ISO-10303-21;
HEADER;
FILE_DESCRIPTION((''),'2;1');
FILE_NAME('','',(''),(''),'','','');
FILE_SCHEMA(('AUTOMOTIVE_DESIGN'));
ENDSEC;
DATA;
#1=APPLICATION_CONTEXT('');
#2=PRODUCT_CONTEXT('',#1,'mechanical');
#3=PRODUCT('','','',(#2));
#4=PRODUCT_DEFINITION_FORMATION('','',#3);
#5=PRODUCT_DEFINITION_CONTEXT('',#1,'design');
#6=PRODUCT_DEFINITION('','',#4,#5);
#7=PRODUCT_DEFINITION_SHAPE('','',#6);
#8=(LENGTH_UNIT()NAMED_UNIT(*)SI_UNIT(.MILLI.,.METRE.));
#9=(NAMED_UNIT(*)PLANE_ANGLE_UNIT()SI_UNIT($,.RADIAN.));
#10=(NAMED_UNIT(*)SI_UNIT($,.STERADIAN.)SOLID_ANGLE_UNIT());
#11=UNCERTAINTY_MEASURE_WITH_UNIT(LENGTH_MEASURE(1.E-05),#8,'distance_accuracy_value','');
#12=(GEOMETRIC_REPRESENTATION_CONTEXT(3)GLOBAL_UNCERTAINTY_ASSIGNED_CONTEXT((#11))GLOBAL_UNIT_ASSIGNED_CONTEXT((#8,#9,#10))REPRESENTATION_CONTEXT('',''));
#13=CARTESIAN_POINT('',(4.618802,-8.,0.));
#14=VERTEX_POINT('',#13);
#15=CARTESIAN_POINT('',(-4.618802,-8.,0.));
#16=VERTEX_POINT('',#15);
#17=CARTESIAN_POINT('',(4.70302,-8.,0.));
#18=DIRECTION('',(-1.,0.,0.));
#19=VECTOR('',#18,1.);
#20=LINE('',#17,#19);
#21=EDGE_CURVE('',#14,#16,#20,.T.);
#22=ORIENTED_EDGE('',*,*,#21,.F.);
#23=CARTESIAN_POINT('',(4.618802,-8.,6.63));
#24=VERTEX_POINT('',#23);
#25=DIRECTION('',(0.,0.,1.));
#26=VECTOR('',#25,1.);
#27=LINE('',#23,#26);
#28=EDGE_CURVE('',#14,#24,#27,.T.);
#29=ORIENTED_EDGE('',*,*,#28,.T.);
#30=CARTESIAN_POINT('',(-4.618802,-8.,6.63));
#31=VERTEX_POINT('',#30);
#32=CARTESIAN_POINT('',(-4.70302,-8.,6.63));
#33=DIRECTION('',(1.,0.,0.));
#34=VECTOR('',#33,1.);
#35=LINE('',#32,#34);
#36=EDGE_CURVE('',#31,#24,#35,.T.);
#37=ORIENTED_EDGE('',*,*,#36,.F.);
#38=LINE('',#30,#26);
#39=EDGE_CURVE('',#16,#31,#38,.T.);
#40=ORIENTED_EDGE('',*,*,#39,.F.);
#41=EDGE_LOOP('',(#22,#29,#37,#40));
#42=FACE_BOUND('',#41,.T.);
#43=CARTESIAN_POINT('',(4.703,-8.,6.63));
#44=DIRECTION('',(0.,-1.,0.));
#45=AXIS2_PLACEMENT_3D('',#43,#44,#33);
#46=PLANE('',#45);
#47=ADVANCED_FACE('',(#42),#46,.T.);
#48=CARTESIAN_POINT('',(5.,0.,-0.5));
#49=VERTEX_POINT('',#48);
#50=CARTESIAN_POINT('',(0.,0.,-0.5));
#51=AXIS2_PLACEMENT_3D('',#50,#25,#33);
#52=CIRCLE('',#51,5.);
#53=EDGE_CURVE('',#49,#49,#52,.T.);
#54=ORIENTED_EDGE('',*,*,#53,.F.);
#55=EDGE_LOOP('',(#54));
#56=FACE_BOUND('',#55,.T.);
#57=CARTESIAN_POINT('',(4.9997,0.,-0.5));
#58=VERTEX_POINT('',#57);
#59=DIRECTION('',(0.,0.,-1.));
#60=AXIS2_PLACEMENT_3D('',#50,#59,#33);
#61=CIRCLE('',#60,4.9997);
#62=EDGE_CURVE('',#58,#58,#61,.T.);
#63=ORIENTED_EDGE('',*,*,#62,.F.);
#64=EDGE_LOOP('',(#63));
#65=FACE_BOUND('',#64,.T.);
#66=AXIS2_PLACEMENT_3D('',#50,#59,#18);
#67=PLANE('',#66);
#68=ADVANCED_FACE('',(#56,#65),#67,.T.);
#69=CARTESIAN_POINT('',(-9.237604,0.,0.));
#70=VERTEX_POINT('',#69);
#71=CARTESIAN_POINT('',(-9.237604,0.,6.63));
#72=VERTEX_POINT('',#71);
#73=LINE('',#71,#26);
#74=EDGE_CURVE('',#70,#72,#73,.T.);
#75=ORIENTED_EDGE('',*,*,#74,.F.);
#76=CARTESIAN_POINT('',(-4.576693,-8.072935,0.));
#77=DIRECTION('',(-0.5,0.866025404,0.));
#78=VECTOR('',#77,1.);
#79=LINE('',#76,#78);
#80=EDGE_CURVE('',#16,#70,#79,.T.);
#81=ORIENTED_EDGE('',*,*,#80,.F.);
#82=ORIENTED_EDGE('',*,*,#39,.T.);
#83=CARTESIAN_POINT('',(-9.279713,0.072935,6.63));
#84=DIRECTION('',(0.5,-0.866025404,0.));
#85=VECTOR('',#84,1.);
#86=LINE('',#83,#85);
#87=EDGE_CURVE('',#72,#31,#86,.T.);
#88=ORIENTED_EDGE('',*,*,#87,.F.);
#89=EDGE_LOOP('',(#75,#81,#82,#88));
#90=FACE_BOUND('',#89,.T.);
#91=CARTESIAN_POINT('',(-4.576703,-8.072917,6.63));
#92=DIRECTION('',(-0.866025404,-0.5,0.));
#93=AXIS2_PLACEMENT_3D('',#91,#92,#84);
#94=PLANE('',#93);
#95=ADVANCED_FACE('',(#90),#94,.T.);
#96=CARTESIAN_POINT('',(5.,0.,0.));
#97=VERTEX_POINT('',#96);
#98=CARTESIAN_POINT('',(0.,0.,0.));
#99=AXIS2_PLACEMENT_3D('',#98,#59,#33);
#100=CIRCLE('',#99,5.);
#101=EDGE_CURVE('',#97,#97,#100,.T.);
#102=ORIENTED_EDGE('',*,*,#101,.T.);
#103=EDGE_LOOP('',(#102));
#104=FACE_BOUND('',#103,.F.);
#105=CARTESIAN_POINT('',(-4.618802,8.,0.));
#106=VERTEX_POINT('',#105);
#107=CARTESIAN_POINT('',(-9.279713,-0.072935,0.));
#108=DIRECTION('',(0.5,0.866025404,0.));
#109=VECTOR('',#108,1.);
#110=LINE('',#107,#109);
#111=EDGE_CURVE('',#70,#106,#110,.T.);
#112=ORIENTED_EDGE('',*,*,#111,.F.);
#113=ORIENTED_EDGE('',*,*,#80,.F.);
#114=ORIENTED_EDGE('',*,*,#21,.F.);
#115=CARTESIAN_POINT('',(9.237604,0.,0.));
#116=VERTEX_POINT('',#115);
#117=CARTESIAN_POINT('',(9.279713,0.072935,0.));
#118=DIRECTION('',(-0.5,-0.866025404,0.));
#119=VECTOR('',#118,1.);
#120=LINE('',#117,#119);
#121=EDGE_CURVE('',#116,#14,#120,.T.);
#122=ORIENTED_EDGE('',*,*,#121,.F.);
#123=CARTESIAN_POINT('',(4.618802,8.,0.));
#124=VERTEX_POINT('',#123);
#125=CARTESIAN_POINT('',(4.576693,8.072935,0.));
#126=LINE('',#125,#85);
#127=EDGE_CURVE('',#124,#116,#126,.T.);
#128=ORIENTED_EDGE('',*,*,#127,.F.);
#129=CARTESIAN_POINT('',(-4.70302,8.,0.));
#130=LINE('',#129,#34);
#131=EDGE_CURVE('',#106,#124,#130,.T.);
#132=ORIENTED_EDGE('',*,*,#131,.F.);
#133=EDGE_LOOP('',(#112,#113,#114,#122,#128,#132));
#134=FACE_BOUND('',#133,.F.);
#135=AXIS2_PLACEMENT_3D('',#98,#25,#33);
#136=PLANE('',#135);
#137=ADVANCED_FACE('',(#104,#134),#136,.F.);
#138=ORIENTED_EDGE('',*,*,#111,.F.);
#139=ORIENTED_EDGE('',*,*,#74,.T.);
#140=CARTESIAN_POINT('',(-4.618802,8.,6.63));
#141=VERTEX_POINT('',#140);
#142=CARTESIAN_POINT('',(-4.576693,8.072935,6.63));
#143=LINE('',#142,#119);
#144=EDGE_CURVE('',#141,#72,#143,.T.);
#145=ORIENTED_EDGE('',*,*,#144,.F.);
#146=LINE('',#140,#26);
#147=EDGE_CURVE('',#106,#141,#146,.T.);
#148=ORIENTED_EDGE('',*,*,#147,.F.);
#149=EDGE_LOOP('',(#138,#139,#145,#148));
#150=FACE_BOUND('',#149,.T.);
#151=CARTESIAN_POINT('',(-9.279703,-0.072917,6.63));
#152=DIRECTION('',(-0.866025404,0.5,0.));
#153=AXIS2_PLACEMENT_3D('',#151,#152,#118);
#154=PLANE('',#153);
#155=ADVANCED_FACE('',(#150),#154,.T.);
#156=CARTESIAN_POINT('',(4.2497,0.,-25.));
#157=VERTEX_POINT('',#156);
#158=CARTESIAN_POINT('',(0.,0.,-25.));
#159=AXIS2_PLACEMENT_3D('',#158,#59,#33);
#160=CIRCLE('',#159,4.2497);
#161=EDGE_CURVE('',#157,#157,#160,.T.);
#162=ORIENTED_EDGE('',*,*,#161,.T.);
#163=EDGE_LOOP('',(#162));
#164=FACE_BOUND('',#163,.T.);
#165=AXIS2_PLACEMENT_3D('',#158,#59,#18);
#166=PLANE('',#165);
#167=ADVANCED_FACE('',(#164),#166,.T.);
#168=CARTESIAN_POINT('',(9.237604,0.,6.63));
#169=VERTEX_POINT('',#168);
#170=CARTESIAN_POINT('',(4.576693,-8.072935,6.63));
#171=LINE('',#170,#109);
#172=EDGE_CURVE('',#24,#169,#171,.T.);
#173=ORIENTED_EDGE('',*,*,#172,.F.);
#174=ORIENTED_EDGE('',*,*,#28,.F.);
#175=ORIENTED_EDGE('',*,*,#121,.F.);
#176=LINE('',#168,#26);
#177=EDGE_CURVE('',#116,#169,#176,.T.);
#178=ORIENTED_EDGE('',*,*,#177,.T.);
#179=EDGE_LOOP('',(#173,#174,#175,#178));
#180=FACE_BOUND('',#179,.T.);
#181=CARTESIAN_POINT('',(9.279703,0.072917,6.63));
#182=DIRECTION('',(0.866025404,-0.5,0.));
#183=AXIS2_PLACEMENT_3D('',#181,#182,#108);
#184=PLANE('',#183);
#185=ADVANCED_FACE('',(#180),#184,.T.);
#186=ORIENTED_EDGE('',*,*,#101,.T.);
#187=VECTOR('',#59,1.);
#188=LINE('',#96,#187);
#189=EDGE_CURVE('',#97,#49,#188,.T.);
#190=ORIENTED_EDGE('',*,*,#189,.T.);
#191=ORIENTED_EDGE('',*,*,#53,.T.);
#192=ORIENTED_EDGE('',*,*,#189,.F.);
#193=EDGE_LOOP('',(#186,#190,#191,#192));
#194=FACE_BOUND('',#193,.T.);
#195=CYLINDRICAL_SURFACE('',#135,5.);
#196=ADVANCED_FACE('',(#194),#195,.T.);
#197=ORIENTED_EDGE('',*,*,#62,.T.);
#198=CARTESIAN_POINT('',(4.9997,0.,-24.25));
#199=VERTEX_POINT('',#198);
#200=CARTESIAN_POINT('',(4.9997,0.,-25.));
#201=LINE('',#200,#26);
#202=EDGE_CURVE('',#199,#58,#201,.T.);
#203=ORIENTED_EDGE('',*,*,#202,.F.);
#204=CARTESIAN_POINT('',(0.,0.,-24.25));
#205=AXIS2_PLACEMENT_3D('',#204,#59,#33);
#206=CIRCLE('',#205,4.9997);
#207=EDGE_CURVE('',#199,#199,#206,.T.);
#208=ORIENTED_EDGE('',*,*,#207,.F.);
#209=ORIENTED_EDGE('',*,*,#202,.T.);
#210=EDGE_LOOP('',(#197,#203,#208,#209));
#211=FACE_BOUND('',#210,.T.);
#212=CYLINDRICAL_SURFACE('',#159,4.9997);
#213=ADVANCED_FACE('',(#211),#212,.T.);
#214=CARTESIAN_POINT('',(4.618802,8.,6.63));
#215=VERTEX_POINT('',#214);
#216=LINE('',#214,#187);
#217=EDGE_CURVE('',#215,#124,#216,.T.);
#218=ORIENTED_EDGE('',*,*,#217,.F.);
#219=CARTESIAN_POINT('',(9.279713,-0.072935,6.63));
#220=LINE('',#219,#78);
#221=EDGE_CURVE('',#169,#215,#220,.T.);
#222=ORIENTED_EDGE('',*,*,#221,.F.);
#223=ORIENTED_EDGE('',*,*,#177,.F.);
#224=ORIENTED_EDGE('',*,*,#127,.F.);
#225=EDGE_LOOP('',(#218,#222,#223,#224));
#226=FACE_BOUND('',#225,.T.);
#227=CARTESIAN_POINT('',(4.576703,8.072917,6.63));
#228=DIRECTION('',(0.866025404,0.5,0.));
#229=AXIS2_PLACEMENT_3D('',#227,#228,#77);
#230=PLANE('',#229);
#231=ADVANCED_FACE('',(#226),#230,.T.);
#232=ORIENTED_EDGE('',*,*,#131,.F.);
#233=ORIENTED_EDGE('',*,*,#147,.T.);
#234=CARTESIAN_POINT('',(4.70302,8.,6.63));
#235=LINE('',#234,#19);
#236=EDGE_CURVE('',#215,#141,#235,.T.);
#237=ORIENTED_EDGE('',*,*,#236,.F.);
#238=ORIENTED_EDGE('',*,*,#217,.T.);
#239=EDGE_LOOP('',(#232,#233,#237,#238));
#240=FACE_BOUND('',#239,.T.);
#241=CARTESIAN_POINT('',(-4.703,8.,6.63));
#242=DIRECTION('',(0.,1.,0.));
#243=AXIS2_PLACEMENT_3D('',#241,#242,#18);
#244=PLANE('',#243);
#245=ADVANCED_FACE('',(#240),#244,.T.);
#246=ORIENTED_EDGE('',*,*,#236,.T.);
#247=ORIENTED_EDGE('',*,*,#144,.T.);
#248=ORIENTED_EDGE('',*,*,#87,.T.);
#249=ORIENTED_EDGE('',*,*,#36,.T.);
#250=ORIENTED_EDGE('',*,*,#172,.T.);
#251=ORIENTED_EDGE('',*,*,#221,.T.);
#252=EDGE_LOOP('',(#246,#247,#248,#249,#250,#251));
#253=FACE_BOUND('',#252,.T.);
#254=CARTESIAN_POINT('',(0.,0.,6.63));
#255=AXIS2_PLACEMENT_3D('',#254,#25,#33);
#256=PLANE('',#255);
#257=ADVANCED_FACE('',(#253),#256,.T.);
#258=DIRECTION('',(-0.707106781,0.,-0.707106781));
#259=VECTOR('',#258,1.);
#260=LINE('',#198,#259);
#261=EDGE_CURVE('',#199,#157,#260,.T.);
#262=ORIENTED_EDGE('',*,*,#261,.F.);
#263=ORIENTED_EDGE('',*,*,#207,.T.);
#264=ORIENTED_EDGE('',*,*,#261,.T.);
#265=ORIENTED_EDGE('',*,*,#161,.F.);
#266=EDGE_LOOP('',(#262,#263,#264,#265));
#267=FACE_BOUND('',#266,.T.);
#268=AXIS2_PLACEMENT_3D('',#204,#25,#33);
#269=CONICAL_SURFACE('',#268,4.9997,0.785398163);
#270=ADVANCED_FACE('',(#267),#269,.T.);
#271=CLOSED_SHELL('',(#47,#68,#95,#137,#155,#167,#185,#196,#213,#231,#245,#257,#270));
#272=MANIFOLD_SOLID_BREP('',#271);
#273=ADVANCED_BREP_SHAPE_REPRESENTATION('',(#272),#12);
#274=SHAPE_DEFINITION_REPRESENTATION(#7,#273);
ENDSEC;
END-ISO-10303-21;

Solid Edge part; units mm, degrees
sketch "Sketch1" plane through (0, 0, 0) normal (0, 0, 1) x (1, 0, 0)
  circle A0 centre (0, 0) radius 9.28
  dimension "D1" = 18.56
extrude "Protrusion1" add sketch "Sketch1" along normal blind 6.63
sketch "Sketch2" plane through (0, 0, 0) normal (0, 0, -1) x (1, 0, 0)
  circle A0 centre (0, 0) radius 5
extrude "Protrusion2" add sketch "Sketch2" along normal blind 25
sketch "Sketch3" plane through (0, 0, -25) normal (0, 0, -1) x (1, 0, 0)
  circle A0 centre (0, 0) radius 4.9997
extrude "Cutout1" cut sketch "Sketch3" against normal blind 24.5 flip side to cut
chamfer "Chamfer_1" distance 0.75 angle 45 1 edges at (-4.9997, 0, -25)
sketch "Sketch4" plane through (0, 0, 6.63) normal (0, 0, 1) x (1, 0, 0)
  line L0 (-4.703, 8) -> (4.703, 8)
  dimension "D1" = 16
extrude "Cutout2" cut sketch "Sketch4" against normal up to next material side at (0, 8.05, 6.63)
pattern_circular "Pattern1" count 6 over 360 about axis through (0, 0, 6.63) along (0, 0, 1) of "Cutout2"
properties part number "24104869"
